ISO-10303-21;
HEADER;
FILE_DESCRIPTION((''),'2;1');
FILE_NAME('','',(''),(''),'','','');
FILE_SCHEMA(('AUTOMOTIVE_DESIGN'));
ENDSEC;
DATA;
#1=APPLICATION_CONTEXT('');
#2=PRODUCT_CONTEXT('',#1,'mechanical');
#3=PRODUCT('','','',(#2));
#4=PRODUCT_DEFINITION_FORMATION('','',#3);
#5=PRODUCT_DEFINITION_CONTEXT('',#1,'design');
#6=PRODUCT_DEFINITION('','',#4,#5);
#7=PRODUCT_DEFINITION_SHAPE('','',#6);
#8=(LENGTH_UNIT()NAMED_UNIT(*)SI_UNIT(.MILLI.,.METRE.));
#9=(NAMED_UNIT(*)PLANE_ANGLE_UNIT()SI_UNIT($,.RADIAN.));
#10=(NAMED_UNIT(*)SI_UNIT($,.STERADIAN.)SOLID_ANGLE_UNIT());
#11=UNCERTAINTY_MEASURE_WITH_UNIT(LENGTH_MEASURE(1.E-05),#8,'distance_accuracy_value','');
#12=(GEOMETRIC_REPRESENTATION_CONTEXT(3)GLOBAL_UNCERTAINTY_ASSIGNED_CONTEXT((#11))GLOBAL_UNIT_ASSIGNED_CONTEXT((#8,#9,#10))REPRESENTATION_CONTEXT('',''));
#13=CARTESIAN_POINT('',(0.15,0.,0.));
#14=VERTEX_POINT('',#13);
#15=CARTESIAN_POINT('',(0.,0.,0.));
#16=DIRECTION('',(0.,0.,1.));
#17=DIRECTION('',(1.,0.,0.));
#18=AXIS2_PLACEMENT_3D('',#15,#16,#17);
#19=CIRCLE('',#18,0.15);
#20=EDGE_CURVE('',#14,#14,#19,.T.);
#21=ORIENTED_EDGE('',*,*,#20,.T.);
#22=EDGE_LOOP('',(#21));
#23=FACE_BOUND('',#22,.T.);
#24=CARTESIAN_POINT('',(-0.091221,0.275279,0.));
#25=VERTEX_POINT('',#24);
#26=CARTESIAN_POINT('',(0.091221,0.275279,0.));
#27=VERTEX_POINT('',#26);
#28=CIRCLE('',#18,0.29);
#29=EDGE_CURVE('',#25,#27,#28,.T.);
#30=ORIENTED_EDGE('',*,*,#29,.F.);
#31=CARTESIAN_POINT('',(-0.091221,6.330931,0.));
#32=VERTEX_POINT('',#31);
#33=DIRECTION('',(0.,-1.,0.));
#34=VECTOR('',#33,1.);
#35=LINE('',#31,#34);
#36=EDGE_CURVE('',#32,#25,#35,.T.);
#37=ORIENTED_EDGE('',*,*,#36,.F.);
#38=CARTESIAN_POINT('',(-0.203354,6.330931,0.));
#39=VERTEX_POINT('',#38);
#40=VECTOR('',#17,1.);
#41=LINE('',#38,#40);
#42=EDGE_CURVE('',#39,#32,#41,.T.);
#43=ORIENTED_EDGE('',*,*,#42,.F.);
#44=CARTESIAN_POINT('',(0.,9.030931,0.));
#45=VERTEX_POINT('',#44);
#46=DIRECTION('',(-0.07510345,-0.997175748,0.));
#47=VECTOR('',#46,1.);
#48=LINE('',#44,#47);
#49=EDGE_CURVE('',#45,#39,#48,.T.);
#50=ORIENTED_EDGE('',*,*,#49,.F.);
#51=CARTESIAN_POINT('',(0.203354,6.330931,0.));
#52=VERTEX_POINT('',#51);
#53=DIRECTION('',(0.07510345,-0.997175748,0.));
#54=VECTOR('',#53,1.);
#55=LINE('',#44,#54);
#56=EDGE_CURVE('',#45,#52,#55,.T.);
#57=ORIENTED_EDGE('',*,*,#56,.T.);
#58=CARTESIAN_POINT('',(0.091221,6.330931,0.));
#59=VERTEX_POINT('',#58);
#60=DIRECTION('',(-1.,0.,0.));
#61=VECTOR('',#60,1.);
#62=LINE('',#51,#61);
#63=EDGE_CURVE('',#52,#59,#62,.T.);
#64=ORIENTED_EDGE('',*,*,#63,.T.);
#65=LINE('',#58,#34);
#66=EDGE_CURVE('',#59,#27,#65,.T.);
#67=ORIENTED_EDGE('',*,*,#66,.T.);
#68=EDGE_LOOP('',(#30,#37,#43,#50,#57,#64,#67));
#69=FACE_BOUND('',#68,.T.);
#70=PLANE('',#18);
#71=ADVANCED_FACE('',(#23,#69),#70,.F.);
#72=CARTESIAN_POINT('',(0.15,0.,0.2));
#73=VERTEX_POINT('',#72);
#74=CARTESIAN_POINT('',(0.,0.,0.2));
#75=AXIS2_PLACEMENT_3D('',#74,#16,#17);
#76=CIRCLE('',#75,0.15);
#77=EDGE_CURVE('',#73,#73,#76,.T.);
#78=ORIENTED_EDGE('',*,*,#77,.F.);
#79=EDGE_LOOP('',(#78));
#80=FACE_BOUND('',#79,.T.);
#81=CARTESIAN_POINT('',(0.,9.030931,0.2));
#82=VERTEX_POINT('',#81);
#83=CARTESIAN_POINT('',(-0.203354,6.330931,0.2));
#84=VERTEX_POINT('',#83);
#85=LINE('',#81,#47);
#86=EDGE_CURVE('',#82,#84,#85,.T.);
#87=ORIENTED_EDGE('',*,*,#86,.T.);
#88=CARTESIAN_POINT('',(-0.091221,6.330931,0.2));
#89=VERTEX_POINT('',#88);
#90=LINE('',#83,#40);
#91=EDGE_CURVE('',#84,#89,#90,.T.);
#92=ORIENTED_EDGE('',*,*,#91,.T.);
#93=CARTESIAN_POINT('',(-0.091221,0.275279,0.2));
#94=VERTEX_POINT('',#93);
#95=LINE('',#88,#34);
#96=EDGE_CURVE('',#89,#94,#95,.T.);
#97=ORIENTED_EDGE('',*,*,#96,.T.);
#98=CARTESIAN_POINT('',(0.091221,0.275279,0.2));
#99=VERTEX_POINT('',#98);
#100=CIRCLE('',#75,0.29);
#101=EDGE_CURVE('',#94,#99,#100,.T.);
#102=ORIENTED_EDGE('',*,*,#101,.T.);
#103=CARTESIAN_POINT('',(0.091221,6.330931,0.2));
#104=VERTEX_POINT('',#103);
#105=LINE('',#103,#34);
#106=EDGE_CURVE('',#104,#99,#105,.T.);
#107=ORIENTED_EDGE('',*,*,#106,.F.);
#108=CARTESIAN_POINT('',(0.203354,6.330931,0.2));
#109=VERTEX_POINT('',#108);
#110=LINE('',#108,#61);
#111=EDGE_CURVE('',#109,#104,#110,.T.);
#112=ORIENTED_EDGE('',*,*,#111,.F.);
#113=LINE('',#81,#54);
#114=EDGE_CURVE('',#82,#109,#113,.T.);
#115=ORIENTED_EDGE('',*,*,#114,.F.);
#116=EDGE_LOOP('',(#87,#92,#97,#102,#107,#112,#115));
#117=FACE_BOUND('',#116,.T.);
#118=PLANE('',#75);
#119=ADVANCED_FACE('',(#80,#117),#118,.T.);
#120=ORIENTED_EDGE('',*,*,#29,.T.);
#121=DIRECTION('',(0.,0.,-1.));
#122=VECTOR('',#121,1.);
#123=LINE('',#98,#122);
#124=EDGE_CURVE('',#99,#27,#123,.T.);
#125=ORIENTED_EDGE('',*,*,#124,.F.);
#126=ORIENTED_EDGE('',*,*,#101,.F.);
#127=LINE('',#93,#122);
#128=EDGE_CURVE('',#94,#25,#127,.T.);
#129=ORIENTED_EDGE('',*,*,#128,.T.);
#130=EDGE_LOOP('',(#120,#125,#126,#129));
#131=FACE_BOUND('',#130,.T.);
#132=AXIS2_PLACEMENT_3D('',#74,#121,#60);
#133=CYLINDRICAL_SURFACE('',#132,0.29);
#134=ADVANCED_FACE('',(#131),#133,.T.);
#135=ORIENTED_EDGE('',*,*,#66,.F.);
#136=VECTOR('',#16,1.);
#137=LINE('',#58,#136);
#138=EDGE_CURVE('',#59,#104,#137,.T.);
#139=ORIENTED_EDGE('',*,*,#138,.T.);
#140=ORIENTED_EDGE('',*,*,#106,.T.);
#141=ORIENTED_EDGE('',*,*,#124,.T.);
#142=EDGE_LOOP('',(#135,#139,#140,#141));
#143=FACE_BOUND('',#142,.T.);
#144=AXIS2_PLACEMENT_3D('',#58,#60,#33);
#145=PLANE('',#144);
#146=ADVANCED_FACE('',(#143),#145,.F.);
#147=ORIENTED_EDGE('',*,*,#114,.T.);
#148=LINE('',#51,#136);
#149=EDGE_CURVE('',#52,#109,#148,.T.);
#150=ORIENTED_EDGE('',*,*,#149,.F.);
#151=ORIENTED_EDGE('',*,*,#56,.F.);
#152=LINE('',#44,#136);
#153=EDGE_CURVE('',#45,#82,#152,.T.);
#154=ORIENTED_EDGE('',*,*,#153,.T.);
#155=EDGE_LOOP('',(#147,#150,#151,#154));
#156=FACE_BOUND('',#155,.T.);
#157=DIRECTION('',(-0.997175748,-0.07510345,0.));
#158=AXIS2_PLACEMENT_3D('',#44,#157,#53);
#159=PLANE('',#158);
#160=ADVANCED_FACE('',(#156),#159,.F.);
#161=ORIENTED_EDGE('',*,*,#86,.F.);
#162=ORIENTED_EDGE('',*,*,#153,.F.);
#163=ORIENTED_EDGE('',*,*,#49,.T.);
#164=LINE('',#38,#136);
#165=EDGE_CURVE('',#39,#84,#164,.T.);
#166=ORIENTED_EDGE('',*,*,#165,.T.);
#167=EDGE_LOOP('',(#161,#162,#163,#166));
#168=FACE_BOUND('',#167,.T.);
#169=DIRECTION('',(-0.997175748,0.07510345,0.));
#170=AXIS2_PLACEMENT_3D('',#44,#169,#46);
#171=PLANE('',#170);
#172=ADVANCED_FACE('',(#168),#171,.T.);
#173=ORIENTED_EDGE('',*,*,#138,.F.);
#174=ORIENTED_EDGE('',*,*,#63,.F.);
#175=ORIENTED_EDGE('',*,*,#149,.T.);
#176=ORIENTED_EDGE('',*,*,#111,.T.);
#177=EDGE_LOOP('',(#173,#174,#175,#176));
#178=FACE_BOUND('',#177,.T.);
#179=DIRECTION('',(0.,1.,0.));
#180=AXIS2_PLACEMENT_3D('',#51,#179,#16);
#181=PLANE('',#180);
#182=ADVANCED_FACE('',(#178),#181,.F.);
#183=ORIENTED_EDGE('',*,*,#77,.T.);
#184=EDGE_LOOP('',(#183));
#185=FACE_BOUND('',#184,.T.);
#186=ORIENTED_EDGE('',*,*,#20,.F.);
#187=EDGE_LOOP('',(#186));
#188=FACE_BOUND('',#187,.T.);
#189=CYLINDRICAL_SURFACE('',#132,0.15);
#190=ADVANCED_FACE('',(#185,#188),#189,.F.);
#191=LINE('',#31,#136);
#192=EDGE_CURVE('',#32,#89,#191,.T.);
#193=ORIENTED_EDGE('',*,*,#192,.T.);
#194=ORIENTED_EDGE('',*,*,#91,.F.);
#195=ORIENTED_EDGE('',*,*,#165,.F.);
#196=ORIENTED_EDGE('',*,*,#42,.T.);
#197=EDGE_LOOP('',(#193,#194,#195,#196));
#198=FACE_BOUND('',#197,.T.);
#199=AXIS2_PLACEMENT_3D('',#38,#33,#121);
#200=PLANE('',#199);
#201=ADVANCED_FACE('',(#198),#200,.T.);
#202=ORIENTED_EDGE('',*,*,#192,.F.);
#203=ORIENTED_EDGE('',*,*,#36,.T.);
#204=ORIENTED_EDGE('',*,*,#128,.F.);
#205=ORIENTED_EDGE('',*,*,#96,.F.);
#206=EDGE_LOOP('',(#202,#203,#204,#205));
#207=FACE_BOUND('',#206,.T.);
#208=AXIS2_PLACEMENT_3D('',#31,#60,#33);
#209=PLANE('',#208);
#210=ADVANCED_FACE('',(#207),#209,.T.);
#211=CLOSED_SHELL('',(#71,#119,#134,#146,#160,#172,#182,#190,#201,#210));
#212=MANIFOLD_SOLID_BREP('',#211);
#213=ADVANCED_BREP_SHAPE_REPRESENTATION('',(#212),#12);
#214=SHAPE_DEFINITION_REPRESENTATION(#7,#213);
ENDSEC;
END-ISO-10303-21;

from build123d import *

# Parameters (mm, degrees)
SKETCH_2_R          = 0.29
SKETCH_2_R_2        = 0.15
EXTRUDE_1_DEPTH     = 0.2
EXTRUDE_3_DEPTH     = 0.2
CUT_EXTRUDE_START   = -0.2
CUT_EXTRUDE_2_DEPTH = 0.2


# Read off the part's stored shape, not the designer's step: 切除-拉伸2
with BuildPart() as part:
    # 草图2 → 凸台-拉伸1 (new body)
    with BuildSketch(Plane.XY):
        Circle(SKETCH_2_R)
        Circle(SKETCH_2_R_2, mode=Mode.SUBTRACT)
    extrude(amount=EXTRUDE_1_DEPTH)

    # 草图3 → 凸台-拉伸3 (add)
    with BuildSketch(Plane.XY.offset(0.2)):
        Polygon((0, 0), (0, 9.030931314), (-0.203353638, 6.330931314), (-0.091221417, 6.330931314), (-0.091221417, 0), align=None)
    extrude_3 = extrude(amount=-EXTRUDE_3_DEPTH)

    # 镜向1: 凸台-拉伸3 across plane
    add(extrude_3.mirror(Plane(origin=(0, 0, 0), x_dir=(0, 0, 1), z_dir=(1, 0, 0))))

    # 切除-拉伸2 outline → 切除-拉伸2 (cut)
    with BuildSketch(Plane.XY.offset(0.2).offset(CUT_EXTRUDE_START)):
        with BuildLine():
            Line((0.091221417, 0), (0.091221417, 0.11907415))
            ThreePointArc((0.091221417, 0.11907415), (0, 0.15), (-0.091221417, 0.11907415))
            Line((-0.091221417, 0.11907415), (-0.091221417, 0))
            Line((-0.091221417, 0), (0.091221417, 0))
        make_face()
    extrude(amount=CUT_EXTRUDE_2_DEPTH, mode=Mode.SUBTRACT)


solid = part.part
